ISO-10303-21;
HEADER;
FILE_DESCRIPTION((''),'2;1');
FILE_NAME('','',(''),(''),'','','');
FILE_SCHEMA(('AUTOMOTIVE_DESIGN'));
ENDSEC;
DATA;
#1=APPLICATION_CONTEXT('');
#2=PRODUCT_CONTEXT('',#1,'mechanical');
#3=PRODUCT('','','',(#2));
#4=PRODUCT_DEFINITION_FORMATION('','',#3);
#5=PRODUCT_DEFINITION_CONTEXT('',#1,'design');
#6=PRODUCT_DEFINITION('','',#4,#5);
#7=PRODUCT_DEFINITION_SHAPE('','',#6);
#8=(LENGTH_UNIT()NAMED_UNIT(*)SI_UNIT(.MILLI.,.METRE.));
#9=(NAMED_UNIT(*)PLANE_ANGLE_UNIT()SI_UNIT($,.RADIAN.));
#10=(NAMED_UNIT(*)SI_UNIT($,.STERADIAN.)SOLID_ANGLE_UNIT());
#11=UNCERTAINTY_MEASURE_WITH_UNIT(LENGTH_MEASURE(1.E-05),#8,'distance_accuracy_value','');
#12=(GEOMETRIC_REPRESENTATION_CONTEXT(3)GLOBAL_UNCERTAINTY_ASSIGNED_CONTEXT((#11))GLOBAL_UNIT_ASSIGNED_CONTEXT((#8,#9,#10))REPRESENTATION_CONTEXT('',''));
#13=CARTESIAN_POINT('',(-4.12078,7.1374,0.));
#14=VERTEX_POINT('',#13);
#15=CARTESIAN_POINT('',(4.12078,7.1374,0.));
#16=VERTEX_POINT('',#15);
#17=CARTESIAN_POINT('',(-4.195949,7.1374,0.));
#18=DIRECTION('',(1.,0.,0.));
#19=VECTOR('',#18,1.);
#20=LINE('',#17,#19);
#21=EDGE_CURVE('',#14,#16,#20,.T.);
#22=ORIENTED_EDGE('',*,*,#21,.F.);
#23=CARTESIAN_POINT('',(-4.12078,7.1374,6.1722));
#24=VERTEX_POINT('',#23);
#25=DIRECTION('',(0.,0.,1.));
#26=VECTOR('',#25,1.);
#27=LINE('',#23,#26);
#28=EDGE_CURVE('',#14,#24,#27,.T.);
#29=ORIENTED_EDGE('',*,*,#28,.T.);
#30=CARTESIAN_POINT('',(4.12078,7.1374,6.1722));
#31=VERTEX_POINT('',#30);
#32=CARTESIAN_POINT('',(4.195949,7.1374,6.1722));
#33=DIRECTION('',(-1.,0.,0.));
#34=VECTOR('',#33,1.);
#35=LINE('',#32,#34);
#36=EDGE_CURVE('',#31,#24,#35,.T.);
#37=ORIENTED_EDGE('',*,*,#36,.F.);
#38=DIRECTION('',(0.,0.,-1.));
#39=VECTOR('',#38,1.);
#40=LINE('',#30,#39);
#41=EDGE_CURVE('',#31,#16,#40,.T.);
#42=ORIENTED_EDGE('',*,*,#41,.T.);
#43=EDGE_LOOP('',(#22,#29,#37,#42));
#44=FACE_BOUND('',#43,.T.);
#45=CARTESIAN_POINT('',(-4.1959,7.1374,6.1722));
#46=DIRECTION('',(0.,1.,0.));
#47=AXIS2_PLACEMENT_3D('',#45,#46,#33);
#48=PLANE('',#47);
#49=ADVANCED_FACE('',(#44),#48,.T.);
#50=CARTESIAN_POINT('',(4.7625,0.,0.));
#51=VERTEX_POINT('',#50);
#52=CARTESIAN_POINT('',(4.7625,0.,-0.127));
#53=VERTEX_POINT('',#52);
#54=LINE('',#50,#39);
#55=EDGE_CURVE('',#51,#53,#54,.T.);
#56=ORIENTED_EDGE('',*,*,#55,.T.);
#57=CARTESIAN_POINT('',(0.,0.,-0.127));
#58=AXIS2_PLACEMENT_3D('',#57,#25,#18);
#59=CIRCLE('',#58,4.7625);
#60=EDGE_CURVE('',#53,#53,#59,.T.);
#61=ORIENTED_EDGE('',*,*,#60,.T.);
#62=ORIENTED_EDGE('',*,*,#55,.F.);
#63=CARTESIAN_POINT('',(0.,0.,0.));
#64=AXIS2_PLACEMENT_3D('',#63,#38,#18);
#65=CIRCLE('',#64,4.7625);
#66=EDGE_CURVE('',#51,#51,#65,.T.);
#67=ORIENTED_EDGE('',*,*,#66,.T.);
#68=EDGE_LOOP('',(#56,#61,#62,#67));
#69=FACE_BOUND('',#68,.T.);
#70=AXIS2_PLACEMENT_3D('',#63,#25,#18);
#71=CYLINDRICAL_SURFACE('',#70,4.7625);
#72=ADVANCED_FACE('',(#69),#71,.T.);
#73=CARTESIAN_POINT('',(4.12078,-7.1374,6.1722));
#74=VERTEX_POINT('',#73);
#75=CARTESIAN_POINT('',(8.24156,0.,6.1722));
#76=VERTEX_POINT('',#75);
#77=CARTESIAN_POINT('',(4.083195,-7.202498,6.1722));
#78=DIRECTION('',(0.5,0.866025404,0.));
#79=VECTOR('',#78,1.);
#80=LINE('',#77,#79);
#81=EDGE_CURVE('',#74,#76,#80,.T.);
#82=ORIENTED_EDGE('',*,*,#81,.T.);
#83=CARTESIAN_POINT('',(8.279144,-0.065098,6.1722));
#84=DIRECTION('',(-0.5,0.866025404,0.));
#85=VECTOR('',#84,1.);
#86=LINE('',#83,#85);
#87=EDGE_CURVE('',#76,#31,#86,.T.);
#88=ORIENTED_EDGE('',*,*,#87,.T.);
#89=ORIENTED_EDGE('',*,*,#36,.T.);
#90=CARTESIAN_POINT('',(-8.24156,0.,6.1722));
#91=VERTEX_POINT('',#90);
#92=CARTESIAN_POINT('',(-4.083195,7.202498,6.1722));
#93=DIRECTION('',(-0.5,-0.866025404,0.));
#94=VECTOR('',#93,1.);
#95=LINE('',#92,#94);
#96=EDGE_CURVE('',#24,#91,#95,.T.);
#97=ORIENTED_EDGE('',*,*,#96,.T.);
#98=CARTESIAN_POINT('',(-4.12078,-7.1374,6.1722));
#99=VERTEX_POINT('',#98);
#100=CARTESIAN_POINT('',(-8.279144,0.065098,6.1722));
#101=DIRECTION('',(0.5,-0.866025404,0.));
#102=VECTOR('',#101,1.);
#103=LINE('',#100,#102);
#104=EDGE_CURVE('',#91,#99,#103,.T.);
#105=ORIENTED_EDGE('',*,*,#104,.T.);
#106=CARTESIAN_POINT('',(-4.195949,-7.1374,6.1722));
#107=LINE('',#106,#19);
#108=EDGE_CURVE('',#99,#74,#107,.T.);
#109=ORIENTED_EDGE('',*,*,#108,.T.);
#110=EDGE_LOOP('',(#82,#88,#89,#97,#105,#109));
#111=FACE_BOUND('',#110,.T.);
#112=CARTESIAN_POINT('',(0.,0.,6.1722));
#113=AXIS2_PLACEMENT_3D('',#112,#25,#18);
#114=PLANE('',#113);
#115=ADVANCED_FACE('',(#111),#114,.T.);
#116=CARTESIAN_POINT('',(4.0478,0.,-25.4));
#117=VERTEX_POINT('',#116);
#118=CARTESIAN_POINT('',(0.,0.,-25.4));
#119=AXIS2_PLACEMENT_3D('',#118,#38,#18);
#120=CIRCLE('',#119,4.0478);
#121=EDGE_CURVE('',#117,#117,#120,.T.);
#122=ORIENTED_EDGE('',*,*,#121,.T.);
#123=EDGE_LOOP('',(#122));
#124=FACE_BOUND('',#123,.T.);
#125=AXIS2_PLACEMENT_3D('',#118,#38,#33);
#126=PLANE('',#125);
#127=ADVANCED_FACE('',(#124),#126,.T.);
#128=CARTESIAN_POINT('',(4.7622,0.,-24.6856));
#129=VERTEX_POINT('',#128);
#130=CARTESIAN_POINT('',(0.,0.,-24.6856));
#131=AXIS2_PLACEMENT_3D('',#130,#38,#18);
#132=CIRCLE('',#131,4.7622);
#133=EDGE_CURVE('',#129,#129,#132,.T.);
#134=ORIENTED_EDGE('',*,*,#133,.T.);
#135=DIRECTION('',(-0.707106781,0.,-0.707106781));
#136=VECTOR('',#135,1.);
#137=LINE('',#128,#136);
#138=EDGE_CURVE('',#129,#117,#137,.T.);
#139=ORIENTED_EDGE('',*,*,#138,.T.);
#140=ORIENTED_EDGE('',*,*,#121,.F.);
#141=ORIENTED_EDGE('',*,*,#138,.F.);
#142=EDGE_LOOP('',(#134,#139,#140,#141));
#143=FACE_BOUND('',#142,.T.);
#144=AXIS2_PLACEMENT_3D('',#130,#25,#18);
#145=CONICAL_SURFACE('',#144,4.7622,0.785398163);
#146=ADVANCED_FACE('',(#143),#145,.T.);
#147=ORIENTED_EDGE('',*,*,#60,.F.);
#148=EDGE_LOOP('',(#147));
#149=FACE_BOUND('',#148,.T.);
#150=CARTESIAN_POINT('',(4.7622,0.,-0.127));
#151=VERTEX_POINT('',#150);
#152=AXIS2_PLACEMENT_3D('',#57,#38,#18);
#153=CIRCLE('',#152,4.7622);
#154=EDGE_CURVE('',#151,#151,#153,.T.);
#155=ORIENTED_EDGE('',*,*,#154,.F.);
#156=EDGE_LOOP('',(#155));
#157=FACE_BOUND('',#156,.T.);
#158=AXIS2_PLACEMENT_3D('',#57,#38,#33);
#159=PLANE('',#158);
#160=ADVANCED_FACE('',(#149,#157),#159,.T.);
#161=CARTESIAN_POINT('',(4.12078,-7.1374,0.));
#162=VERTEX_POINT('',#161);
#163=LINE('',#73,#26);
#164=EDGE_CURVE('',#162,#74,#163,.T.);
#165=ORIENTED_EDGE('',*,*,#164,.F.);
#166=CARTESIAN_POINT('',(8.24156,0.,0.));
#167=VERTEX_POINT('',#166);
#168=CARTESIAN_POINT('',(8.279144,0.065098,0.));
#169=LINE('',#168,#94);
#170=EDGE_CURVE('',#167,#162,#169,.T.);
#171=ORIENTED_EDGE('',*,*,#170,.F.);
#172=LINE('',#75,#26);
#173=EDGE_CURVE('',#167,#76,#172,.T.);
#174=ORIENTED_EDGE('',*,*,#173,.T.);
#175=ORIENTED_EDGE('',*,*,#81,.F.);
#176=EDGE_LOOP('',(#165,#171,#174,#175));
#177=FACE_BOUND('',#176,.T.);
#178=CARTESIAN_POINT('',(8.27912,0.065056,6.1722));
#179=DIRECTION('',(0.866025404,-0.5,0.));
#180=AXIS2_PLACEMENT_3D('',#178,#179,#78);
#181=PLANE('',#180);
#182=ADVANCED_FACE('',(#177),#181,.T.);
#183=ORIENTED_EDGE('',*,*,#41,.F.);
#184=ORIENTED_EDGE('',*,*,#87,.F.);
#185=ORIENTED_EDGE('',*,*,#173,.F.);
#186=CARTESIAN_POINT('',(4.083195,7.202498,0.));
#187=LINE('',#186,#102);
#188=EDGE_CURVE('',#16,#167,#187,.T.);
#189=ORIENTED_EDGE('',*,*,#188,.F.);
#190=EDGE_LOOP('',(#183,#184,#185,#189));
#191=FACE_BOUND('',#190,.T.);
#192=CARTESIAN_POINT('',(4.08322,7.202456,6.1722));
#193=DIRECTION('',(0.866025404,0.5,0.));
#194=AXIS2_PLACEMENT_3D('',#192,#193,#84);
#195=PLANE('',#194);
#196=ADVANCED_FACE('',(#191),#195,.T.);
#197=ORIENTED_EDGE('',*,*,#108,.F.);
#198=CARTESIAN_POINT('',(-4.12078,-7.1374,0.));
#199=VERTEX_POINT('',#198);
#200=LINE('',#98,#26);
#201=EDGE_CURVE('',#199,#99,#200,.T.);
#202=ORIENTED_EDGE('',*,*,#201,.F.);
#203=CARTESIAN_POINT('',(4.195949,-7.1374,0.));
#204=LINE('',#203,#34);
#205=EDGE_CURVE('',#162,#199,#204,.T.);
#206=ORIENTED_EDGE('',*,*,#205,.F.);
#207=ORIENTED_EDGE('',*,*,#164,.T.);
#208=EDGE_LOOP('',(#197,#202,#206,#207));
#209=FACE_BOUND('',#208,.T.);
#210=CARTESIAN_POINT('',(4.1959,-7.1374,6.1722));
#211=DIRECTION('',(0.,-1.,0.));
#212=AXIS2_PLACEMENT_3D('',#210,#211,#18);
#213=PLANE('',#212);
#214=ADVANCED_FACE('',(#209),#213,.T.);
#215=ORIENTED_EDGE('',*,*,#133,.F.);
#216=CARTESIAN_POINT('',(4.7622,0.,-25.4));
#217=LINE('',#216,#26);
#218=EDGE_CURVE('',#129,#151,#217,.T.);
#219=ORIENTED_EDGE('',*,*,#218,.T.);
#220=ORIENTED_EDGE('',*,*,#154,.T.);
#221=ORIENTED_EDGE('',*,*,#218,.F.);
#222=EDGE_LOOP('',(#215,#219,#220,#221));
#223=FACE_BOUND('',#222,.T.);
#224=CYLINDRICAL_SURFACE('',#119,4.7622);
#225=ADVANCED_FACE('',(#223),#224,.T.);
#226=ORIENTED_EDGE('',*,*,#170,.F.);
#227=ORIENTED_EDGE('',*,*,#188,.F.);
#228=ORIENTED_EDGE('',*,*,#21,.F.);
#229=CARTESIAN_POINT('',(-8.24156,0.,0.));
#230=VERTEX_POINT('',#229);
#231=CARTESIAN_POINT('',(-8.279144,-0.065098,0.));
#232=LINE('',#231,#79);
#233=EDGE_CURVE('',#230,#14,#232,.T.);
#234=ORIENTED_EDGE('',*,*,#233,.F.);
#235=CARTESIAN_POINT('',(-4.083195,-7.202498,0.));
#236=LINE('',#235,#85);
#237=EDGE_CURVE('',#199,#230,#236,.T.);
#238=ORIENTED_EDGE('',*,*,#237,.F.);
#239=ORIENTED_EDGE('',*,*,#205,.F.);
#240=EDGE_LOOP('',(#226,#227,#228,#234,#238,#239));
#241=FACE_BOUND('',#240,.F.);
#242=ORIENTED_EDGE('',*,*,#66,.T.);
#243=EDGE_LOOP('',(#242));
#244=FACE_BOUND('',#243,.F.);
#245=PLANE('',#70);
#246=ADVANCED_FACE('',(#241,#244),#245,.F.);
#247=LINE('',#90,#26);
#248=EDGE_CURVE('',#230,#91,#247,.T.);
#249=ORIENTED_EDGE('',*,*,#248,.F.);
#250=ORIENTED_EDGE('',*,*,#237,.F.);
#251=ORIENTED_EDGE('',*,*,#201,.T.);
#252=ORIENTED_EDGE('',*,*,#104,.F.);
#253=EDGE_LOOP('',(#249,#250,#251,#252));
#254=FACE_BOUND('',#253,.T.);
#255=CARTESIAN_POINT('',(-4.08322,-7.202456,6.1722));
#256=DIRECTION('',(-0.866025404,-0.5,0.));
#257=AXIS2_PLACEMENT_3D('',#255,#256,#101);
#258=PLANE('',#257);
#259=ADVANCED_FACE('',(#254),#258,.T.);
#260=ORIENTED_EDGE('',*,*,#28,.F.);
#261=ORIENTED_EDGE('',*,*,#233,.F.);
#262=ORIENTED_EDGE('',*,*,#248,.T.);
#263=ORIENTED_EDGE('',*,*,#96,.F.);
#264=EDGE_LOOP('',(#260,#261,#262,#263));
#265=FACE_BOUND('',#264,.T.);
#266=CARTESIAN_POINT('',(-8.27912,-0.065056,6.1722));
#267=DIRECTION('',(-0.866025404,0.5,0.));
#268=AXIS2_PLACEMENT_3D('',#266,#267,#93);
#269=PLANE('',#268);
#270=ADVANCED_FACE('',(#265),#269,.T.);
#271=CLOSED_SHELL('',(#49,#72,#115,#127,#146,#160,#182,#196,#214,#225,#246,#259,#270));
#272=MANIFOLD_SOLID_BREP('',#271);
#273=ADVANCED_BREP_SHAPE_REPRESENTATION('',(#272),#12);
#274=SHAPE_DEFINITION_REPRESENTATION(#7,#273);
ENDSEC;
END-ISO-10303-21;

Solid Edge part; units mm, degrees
sketch "Sketch1" plane through (0, 0, 0) normal (0, 0, 1) x (1, 0, 0)
  circle A0 centre (0, 0) radius 8.2794
  dimension "D1" = 16.5588
extrude "Protrusion1" add sketch "Sketch1" along normal blind 6.1722
sketch "Sketch2" plane through (0, 0, 0) normal (0, 0, -1) x (1, 0, 0)
  circle A0 centre (0, 0) radius 4.7625
extrude "Protrusion2" add sketch "Sketch2" along normal blind 25.4
sketch "Sketch3" plane through (0, 0, -25.4) normal (0, 0, -1) x (1, 0, 0)
  circle A0 centre (0, 0) radius 4.7622
extrude "Cutout1" cut sketch "Sketch3" against normal blind 25.273 flip side to cut
chamfer "Chamfer_1" distance 0.7144 angle 45 1 edges at (-4.7622, 0, -25.4)
sketch "Sketch4" plane through (0, 0, 6.1722) normal (0, 0, 1) x (1, 0, 0)
  line L0 (-4.1959, 7.1374) -> (4.1959, 7.1374)
  dimension "D1" = 14.2748
extrude "Cutout2" cut sketch "Sketch4" against normal up to next material side at (0, 7.1874, 6.1722)
pattern_circular "Pattern1" count 6 over 360 about axis through (0, 0, 6.1722) along (0, 0, 1) of "Cutout2"
properties part number "24103209"
